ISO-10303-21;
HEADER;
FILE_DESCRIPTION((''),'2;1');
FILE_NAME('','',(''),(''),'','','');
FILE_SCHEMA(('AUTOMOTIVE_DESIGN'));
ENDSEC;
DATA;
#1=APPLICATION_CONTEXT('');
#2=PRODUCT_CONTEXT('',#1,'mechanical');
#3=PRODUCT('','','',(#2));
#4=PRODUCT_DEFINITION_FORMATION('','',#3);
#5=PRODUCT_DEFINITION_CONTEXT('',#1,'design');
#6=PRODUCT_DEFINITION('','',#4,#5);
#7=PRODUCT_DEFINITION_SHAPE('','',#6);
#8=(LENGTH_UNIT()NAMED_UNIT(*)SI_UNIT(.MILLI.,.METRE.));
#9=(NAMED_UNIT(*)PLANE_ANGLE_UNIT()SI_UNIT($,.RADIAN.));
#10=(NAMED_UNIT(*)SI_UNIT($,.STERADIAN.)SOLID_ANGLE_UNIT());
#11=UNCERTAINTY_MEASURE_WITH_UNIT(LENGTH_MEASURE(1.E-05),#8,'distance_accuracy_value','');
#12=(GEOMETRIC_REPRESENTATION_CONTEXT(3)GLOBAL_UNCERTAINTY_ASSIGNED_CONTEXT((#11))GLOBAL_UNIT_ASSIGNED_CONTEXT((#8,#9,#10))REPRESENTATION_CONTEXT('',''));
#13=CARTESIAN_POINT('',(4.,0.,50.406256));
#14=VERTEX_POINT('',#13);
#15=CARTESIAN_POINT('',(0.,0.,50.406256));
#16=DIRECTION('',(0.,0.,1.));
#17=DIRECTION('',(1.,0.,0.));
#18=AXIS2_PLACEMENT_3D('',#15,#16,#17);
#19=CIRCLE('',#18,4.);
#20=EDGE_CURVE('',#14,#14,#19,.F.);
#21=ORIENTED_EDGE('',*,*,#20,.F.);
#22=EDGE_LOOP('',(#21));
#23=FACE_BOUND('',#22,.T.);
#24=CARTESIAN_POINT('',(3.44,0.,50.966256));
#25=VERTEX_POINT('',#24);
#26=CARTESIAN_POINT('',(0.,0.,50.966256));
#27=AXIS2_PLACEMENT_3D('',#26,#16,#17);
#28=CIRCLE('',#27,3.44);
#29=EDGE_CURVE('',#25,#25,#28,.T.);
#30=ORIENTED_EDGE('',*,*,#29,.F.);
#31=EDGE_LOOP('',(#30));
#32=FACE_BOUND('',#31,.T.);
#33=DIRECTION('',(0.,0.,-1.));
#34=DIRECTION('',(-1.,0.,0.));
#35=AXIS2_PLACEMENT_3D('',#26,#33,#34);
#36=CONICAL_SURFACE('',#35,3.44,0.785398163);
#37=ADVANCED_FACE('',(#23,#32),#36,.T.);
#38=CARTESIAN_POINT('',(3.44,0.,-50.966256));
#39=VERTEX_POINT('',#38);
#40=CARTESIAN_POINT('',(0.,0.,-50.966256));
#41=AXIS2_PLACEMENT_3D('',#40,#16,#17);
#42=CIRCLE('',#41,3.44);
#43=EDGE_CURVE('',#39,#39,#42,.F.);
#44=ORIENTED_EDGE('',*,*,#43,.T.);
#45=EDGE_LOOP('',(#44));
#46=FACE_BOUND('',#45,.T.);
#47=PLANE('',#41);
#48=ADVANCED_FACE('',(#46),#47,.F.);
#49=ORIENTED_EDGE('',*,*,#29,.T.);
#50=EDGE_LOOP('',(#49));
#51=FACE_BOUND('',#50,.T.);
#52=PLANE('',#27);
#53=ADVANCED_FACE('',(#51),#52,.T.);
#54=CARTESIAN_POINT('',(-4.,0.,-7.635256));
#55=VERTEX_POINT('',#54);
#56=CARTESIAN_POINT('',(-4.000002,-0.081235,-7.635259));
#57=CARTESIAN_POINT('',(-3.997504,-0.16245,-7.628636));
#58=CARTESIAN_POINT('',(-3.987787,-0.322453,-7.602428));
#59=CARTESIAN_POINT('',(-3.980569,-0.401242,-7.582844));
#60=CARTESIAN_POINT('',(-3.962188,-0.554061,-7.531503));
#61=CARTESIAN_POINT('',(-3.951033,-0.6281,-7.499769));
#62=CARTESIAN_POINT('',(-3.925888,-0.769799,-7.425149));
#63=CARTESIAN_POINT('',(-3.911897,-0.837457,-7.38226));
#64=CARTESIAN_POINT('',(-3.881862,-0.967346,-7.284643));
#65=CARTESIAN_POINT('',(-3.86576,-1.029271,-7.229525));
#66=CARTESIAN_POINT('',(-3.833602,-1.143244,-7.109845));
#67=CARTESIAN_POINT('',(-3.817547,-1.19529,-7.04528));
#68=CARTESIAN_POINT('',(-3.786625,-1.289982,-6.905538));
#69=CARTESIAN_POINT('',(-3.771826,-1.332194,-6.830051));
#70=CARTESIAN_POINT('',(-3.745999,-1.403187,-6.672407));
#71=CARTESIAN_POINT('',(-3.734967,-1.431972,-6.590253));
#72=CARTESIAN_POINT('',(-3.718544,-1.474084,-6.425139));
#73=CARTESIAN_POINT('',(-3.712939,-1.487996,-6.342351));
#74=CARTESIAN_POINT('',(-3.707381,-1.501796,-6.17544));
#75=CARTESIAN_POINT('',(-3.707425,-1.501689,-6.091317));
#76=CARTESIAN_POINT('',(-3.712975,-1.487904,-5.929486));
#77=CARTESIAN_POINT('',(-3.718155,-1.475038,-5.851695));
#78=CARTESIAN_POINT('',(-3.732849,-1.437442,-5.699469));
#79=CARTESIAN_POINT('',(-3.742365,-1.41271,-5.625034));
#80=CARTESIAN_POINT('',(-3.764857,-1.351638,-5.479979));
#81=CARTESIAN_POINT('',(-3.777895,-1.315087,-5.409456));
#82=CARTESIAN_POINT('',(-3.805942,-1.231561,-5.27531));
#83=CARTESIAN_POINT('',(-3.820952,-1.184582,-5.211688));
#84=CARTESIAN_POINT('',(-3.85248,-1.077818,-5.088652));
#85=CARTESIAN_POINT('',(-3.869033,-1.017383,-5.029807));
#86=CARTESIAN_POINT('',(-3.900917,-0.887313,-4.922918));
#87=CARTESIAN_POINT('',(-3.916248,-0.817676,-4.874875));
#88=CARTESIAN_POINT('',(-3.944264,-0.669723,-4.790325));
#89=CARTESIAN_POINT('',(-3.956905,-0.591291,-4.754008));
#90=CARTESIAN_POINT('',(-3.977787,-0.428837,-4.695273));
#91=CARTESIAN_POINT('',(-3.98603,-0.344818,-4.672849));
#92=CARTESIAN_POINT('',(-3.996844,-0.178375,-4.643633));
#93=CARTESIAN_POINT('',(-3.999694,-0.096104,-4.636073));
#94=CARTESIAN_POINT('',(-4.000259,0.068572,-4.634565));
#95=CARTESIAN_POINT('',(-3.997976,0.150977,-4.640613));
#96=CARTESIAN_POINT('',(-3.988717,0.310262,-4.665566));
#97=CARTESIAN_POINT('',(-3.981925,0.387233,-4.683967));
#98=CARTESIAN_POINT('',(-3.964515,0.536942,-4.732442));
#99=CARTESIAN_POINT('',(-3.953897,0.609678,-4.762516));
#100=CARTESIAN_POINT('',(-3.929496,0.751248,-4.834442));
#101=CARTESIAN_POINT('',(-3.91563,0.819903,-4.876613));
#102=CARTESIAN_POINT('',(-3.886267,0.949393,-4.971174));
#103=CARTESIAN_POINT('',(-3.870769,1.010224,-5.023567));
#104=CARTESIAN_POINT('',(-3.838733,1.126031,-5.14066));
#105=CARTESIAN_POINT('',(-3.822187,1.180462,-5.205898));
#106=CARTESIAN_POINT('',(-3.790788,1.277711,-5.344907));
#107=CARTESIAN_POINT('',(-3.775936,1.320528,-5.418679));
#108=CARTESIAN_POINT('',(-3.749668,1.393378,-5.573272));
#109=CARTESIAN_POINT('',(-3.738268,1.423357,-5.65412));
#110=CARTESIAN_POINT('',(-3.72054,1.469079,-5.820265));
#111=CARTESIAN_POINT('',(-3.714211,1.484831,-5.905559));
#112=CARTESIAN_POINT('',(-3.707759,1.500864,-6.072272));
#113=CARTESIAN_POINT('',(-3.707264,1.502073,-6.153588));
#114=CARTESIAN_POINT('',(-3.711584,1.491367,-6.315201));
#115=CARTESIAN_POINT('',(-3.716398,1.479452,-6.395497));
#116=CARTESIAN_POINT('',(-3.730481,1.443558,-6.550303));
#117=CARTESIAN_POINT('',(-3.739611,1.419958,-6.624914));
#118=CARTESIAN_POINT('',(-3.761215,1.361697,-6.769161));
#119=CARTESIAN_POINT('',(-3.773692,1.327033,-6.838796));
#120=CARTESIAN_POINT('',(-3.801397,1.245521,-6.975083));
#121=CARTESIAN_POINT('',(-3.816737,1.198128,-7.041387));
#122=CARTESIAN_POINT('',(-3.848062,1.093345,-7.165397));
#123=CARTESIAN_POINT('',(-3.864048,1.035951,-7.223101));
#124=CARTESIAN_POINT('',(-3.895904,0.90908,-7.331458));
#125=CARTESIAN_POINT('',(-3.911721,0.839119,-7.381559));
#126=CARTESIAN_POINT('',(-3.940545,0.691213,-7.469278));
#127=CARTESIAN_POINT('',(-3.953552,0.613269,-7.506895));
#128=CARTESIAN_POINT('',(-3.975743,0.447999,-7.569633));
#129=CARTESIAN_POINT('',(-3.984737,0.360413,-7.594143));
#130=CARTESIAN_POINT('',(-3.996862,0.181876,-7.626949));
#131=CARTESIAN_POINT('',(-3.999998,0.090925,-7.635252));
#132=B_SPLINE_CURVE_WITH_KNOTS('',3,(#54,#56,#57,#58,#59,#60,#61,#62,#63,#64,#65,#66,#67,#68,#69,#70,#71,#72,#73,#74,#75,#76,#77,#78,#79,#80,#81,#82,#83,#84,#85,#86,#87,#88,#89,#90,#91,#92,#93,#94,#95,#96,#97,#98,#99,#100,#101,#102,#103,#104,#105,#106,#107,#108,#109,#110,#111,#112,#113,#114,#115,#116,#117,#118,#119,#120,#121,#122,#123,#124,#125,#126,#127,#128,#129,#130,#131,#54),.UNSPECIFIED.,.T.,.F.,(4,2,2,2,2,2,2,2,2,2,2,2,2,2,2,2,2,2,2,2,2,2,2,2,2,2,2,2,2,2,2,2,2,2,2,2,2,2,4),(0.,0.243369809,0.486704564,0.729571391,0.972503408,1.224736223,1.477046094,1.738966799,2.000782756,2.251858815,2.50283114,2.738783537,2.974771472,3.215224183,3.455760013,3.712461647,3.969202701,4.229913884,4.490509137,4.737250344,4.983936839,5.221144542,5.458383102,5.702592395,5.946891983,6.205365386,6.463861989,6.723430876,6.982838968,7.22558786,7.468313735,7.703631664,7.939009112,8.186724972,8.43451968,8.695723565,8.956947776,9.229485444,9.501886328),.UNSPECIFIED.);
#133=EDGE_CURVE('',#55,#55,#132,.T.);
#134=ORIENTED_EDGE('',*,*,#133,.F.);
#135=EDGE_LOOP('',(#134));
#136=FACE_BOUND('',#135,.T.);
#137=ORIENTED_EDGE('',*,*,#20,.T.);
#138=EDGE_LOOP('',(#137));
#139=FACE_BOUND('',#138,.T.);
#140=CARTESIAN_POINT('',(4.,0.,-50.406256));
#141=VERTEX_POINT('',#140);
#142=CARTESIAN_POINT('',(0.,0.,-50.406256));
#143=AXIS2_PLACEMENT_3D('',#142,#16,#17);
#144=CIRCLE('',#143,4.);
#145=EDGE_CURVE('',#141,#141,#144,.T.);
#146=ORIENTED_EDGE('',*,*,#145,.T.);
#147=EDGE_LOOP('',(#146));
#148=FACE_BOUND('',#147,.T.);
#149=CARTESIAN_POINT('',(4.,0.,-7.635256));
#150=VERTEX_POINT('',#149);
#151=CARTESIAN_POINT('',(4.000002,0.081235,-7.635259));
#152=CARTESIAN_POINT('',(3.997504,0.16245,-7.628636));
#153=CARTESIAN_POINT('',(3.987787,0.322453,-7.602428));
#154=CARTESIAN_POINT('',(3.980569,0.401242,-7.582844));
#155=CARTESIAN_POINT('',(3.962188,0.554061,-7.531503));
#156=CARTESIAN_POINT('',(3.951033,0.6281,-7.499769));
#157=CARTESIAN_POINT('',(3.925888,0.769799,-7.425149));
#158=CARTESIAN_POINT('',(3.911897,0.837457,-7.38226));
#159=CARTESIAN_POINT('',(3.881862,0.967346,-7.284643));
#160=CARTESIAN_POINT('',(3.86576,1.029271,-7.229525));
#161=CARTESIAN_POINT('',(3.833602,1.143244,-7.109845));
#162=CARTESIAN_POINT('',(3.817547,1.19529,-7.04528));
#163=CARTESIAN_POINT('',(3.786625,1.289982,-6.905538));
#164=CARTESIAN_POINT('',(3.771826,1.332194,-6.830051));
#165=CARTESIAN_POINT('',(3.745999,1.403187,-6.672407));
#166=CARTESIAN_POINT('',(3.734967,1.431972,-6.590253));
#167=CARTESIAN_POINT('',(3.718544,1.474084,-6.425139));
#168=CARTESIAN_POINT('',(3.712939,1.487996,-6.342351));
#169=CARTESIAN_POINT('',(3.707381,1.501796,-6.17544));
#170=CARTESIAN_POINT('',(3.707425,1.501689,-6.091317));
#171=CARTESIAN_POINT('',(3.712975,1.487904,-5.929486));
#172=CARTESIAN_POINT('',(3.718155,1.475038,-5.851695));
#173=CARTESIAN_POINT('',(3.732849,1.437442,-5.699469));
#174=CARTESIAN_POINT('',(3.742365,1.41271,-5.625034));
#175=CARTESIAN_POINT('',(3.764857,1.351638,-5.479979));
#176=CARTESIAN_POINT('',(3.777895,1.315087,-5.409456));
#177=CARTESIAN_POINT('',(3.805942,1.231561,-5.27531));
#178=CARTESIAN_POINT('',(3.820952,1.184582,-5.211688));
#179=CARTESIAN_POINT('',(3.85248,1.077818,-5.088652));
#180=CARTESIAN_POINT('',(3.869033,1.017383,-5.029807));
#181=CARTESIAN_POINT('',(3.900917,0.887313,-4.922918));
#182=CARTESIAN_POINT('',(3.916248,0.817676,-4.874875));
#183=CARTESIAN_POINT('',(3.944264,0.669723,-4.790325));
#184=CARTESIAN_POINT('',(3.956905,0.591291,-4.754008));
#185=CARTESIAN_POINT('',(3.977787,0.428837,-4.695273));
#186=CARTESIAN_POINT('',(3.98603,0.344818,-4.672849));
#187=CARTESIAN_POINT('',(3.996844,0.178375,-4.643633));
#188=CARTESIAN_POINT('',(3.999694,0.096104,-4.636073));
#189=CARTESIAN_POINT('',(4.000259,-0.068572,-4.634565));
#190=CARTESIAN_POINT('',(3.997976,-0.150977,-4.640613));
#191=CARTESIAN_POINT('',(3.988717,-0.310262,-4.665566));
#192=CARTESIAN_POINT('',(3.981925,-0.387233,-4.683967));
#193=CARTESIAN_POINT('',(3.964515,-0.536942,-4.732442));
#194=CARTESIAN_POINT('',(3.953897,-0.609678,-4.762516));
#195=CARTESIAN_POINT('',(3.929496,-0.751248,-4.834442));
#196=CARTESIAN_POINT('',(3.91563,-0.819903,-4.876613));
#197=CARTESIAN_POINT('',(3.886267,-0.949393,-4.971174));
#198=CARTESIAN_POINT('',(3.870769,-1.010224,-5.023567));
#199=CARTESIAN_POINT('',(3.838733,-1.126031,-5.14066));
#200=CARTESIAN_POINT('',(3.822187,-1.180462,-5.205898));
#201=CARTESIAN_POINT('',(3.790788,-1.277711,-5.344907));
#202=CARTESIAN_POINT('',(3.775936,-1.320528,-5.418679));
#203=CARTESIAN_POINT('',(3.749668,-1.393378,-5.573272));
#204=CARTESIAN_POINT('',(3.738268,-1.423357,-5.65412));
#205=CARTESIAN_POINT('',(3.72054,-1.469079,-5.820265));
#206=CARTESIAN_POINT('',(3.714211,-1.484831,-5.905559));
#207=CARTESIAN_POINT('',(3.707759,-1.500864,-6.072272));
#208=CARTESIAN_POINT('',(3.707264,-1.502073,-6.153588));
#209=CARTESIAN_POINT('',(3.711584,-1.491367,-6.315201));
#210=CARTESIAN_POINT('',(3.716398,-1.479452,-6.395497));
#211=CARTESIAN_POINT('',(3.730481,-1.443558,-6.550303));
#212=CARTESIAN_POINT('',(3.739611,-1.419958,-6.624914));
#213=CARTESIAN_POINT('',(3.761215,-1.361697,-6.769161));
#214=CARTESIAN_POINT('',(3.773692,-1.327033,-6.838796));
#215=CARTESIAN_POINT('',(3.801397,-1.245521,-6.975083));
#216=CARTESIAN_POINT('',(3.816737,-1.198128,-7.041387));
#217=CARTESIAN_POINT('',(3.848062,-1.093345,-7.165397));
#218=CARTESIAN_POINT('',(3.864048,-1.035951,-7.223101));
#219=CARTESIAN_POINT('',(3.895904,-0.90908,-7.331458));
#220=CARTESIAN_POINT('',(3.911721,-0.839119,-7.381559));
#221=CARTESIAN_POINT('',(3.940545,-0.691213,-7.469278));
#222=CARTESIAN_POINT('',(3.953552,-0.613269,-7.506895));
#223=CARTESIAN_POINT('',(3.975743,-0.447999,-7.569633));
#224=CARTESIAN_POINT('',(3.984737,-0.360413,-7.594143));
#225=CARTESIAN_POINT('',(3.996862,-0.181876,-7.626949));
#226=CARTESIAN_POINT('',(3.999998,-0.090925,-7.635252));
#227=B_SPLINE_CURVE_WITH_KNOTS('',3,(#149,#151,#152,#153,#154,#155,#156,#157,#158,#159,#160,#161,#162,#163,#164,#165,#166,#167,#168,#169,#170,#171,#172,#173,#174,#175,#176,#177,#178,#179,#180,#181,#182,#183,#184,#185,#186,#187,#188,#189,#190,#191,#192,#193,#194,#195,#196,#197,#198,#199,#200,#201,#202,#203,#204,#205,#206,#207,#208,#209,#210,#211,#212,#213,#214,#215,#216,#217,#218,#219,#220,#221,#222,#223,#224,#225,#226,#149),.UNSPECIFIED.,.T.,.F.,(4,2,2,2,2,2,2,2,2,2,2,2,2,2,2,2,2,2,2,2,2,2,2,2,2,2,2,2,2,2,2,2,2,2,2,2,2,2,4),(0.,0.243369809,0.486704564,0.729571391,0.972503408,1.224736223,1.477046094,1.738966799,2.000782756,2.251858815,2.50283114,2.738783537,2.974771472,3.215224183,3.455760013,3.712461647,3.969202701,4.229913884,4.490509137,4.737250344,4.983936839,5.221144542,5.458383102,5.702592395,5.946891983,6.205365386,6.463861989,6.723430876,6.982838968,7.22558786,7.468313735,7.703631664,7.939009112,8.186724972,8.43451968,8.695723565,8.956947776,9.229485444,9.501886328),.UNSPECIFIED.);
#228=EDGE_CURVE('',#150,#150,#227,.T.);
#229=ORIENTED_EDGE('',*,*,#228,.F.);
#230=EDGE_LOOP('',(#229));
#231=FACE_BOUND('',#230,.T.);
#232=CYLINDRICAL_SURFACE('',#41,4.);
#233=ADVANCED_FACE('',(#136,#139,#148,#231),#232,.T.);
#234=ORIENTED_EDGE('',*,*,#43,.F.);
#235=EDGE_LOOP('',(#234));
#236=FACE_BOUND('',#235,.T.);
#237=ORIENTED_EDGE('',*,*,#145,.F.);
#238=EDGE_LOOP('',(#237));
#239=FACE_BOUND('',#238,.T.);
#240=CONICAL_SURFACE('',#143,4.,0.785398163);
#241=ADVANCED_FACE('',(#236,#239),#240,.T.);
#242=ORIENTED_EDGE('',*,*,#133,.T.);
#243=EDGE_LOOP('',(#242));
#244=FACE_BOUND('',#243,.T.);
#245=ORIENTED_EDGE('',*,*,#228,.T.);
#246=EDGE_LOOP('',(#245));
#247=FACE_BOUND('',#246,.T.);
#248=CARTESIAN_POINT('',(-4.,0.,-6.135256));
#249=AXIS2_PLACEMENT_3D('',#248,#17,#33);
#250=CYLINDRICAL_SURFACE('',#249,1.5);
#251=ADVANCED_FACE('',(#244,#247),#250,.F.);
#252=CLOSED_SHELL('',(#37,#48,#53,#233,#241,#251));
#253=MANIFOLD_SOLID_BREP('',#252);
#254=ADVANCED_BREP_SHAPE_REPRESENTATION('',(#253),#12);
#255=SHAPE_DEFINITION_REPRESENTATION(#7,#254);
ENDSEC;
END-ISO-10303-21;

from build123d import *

# Parameters (mm, degrees)
BOSS_EXTRUDE1_DEPTH      = 50.9662557
BOSS_EXTRUDE1_DEPTH_BACK = 50.9662557
SKETCH1_R                = 4
CUT_EXTRUDE1_START       = -4.000000101
CUT_EXTRUDE1_OUTLINE_R   = 1.500000048
CUT_EXTRUDE1_DEPTH       = 8.000000202
CHAMFER1_SIZE            = 0.56


# Read off the part's stored shape, not the designer's step: Cut-Extrude1
with BuildPart() as part:
    # Sketch1 → Boss-Extrude1 (new, two sides: drawn at the far end of the back side and taken through both)
    with BuildSketch(Plane.XY.offset(-BOSS_EXTRUDE1_DEPTH_BACK)):
        Circle(SKETCH1_R)
    extrude(amount=BOSS_EXTRUDE1_DEPTH + BOSS_EXTRUDE1_DEPTH_BACK)

    # Cut-Extrude1 outline → Cut-Extrude1 (cut)
    with BuildSketch(Plane.YZ.offset(CUT_EXTRUDE1_START)):
        with Locations((0, -6.1352557)):
            Circle(CUT_EXTRUDE1_OUTLINE_R)
    extrude(amount=CUT_EXTRUDE1_DEPTH, mode=Mode.SUBTRACT)

    # Chamfer1
    chamfer1_edges = [part.edges().sort_by_distance(p)[0] for p in [
        (-4, 0, -50.9662557),
        (-4, 0, 50.9662557),
    ]]
    chamfer(chamfer1_edges, length=CHAMFER1_SIZE)


solid = part.part
